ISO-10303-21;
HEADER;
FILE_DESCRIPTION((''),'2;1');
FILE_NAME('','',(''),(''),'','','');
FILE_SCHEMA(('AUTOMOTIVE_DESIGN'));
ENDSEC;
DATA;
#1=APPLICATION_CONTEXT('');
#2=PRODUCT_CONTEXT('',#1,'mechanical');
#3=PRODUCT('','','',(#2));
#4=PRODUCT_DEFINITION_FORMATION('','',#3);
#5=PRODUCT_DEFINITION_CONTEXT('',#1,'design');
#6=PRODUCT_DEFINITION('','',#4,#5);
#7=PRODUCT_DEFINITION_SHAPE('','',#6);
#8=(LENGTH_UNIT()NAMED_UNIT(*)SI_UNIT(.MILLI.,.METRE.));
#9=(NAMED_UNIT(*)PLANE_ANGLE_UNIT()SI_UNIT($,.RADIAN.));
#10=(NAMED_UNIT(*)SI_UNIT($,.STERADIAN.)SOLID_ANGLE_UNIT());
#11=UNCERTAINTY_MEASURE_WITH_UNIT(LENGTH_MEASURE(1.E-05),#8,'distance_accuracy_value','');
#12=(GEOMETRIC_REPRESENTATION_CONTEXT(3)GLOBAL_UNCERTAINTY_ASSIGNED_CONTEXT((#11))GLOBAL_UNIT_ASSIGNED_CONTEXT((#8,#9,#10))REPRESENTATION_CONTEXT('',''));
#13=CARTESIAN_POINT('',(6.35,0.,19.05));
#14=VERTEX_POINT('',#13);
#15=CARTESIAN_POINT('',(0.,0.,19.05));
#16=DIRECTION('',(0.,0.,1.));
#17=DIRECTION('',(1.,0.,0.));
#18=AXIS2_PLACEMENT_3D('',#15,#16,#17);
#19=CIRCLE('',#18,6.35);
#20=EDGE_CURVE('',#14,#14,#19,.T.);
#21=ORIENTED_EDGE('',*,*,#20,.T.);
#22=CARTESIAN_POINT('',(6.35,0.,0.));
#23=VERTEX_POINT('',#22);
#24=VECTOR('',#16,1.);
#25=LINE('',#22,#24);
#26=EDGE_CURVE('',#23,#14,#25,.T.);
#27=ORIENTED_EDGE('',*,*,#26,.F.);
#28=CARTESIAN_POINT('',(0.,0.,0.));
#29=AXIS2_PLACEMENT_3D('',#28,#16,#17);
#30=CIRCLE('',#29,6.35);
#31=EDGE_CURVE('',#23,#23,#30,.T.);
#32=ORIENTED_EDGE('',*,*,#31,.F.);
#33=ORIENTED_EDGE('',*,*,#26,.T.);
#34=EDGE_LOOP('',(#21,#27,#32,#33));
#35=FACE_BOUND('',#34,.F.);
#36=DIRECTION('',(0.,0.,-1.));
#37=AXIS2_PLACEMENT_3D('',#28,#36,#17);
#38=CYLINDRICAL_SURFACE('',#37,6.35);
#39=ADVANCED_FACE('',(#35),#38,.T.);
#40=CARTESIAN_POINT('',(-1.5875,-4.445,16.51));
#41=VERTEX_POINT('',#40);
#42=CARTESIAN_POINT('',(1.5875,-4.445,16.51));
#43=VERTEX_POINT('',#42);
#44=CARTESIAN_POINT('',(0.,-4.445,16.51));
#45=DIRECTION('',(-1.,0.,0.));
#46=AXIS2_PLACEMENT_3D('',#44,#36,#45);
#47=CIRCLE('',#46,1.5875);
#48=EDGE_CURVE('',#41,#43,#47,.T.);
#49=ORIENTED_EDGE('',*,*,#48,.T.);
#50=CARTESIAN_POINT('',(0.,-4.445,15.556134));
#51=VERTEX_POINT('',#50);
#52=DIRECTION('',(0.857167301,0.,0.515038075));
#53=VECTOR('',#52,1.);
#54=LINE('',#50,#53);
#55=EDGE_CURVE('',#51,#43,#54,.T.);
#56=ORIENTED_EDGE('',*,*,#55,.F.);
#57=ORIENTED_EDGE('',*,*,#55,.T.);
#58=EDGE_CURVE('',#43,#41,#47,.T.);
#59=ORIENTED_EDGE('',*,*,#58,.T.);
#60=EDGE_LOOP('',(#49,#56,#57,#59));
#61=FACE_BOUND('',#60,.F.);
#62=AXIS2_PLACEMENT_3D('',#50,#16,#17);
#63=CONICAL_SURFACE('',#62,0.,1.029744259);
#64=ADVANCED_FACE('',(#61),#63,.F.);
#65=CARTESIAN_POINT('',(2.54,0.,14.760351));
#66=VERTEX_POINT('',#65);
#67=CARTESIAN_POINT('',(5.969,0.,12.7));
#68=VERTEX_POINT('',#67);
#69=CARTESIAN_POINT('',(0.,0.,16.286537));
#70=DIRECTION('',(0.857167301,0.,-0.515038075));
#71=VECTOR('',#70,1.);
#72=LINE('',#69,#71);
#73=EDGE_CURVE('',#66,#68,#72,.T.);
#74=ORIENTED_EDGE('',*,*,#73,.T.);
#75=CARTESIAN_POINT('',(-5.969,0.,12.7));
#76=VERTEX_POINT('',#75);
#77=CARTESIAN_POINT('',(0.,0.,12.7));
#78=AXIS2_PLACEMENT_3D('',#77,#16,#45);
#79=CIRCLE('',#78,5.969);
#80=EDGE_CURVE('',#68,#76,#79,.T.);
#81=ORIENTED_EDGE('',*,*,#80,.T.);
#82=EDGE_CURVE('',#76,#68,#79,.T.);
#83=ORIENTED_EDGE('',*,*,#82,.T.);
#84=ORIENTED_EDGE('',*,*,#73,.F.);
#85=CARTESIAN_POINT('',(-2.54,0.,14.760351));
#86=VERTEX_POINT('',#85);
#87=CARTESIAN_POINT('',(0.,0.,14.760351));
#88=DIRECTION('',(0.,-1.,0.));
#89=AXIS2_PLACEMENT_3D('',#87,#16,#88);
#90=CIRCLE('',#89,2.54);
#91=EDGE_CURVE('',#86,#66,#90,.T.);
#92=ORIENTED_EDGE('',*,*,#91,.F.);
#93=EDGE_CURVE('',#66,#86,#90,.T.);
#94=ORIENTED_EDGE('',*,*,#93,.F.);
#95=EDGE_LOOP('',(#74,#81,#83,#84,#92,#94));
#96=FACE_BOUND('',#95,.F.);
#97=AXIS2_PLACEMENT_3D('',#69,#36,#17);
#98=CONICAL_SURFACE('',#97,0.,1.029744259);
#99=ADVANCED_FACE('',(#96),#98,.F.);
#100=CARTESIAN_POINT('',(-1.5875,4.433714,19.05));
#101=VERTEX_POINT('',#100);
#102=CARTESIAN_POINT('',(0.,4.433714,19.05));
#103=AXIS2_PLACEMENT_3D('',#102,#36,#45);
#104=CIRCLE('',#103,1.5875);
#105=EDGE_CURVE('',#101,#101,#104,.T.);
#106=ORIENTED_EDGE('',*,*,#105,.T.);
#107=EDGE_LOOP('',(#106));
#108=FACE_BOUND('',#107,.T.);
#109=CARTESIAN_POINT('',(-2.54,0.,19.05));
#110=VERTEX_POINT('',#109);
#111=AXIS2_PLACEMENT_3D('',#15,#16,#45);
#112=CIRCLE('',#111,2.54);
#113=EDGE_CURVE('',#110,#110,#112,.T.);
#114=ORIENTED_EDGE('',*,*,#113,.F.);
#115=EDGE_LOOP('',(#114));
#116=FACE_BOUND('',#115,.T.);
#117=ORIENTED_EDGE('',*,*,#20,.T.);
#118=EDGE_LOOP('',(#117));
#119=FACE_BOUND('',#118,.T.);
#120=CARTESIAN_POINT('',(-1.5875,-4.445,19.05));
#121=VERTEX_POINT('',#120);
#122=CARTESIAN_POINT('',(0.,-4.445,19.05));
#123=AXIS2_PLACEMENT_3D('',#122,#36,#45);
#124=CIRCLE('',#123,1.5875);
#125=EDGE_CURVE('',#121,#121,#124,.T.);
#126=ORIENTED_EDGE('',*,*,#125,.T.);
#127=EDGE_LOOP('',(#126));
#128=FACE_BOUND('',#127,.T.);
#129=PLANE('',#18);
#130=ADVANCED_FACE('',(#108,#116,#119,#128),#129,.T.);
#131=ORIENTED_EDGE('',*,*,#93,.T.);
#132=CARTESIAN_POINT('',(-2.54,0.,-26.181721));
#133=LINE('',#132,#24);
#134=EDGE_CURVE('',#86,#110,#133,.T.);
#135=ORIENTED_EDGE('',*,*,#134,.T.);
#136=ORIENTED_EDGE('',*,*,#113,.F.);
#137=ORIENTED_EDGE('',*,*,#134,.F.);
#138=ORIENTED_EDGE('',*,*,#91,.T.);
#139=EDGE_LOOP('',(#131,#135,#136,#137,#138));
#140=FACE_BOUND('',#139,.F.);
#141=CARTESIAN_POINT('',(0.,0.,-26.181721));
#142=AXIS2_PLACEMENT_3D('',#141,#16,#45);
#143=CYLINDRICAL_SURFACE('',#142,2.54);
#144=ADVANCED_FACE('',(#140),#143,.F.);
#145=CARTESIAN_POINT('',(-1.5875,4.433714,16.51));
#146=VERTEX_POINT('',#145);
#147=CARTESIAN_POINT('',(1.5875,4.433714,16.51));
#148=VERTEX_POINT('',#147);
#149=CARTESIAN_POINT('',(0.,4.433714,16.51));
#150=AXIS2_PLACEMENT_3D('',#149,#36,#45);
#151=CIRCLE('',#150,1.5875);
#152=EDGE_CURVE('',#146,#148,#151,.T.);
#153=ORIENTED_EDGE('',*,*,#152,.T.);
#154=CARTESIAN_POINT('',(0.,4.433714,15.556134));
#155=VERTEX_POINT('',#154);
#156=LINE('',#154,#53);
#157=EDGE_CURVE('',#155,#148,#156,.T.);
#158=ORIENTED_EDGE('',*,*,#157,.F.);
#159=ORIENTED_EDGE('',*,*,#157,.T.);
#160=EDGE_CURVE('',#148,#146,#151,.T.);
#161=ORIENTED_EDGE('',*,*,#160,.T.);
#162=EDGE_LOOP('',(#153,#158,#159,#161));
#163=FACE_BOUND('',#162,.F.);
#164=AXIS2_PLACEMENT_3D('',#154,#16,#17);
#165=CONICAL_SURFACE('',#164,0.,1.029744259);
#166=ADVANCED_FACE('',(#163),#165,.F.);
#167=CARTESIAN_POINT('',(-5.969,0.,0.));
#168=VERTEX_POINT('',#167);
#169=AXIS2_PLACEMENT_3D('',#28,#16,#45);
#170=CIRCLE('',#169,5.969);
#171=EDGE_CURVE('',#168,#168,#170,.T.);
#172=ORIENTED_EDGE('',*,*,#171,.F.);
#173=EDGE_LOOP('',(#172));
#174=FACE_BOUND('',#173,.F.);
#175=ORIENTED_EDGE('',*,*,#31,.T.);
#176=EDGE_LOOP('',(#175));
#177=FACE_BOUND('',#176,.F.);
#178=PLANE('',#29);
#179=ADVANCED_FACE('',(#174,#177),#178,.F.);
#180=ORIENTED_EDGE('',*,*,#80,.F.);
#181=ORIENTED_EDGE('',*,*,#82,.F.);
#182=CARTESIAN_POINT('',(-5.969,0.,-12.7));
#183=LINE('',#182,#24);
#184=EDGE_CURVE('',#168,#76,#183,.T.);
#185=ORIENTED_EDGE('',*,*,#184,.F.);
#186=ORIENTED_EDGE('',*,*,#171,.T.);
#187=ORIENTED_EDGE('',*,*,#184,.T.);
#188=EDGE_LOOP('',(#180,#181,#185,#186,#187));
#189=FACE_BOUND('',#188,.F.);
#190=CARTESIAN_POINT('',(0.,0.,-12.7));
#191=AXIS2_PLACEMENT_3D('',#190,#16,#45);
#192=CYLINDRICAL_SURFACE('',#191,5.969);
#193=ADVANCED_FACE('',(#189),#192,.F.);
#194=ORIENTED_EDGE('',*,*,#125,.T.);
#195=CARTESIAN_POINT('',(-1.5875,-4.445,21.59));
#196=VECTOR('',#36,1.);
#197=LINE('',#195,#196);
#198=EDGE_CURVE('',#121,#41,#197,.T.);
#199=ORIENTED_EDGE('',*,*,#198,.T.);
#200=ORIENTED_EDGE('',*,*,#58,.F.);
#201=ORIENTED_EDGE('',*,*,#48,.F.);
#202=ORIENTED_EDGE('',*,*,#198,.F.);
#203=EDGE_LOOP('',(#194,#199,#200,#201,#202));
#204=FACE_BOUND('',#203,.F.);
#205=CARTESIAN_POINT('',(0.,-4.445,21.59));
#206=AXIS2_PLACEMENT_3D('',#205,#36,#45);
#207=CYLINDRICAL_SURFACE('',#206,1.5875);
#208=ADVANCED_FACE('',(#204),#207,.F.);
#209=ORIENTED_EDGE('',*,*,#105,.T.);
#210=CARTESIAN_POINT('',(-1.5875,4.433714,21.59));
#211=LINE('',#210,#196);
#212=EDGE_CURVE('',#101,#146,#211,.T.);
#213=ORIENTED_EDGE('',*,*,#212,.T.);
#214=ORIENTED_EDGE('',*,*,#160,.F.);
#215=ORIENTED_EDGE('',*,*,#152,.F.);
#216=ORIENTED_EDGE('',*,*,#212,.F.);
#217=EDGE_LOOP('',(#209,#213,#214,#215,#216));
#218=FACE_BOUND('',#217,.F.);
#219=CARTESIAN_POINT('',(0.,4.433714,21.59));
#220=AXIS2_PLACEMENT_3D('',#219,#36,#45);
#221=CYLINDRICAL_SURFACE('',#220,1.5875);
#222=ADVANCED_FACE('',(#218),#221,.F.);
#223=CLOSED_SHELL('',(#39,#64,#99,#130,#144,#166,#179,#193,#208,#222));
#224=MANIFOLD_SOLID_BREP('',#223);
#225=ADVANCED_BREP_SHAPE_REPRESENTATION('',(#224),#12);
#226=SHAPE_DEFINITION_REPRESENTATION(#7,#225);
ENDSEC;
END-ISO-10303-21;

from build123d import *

# Parameters (mm, degrees)
F0_R      = 6.35
F1_DEPTH  = 19.05
F3_D      = 5.08
F8_D      = 3.175
F8_DEPTH  = 2.54
F8_TIP    = 0.9538662327
F9_D      = 3.175
F9_DEPTH  = 2.54
F9_TIP    = 0.9538662327
F11_D     = 11.938
F11_DEPTH = 12.7
F11_TIP   = 3.586537035


# Not quite as in the source:
# - the program builds the solid bodies; features that only make, move or delete a surface that nothing else refers to are left out


with BuildPart() as f1:
    # F0 (on Top) → F1 (new body)
    with BuildSketch(Plane.XY):
        Circle(F0_R)
    extrude(amount=F1_DEPTH)

    # F3 (through all)
    with Locations(Plane(origin=(0, 0, 0), x_dir=(1, 0, 0), z_dir=(0, 0, -1))):
        with Locations((0, 0)):
            Hole(F3_D / 2)

    # F8
    with Locations(Plane.XY.offset(19.05)):
        with Locations((0, 4.4337138534)):
            Hole(F8_D / 2, depth=F8_DEPTH)
            with Locations((0, 0, -(F8_DEPTH + F8_TIP / 2))):  # 118° drill point
                Cone(0, F8_D / 2, F8_TIP, mode=Mode.SUBTRACT)

    # F9
    with Locations(Plane.XY.offset(19.05)):
        with Locations((0, -4.445)):
            Hole(F9_D / 2, depth=F9_DEPTH)
            with Locations((0, 0, -(F9_DEPTH + F9_TIP / 2))):  # 118° drill point
                Cone(0, F9_D / 2, F9_TIP, mode=Mode.SUBTRACT)

    # F11
    with Locations(Plane(origin=(0, 0, 0), x_dir=(1, 0, 0), z_dir=(0, 0, -1))):
        with Locations((0, 0)):
            Hole(F11_D / 2, depth=F11_DEPTH)
            with Locations((0, 0, -(F11_DEPTH + F11_TIP / 2))):  # 118° drill point
                Cone(0, F11_D / 2, F11_TIP, mode=Mode.SUBTRACT)


solid = f1.part
